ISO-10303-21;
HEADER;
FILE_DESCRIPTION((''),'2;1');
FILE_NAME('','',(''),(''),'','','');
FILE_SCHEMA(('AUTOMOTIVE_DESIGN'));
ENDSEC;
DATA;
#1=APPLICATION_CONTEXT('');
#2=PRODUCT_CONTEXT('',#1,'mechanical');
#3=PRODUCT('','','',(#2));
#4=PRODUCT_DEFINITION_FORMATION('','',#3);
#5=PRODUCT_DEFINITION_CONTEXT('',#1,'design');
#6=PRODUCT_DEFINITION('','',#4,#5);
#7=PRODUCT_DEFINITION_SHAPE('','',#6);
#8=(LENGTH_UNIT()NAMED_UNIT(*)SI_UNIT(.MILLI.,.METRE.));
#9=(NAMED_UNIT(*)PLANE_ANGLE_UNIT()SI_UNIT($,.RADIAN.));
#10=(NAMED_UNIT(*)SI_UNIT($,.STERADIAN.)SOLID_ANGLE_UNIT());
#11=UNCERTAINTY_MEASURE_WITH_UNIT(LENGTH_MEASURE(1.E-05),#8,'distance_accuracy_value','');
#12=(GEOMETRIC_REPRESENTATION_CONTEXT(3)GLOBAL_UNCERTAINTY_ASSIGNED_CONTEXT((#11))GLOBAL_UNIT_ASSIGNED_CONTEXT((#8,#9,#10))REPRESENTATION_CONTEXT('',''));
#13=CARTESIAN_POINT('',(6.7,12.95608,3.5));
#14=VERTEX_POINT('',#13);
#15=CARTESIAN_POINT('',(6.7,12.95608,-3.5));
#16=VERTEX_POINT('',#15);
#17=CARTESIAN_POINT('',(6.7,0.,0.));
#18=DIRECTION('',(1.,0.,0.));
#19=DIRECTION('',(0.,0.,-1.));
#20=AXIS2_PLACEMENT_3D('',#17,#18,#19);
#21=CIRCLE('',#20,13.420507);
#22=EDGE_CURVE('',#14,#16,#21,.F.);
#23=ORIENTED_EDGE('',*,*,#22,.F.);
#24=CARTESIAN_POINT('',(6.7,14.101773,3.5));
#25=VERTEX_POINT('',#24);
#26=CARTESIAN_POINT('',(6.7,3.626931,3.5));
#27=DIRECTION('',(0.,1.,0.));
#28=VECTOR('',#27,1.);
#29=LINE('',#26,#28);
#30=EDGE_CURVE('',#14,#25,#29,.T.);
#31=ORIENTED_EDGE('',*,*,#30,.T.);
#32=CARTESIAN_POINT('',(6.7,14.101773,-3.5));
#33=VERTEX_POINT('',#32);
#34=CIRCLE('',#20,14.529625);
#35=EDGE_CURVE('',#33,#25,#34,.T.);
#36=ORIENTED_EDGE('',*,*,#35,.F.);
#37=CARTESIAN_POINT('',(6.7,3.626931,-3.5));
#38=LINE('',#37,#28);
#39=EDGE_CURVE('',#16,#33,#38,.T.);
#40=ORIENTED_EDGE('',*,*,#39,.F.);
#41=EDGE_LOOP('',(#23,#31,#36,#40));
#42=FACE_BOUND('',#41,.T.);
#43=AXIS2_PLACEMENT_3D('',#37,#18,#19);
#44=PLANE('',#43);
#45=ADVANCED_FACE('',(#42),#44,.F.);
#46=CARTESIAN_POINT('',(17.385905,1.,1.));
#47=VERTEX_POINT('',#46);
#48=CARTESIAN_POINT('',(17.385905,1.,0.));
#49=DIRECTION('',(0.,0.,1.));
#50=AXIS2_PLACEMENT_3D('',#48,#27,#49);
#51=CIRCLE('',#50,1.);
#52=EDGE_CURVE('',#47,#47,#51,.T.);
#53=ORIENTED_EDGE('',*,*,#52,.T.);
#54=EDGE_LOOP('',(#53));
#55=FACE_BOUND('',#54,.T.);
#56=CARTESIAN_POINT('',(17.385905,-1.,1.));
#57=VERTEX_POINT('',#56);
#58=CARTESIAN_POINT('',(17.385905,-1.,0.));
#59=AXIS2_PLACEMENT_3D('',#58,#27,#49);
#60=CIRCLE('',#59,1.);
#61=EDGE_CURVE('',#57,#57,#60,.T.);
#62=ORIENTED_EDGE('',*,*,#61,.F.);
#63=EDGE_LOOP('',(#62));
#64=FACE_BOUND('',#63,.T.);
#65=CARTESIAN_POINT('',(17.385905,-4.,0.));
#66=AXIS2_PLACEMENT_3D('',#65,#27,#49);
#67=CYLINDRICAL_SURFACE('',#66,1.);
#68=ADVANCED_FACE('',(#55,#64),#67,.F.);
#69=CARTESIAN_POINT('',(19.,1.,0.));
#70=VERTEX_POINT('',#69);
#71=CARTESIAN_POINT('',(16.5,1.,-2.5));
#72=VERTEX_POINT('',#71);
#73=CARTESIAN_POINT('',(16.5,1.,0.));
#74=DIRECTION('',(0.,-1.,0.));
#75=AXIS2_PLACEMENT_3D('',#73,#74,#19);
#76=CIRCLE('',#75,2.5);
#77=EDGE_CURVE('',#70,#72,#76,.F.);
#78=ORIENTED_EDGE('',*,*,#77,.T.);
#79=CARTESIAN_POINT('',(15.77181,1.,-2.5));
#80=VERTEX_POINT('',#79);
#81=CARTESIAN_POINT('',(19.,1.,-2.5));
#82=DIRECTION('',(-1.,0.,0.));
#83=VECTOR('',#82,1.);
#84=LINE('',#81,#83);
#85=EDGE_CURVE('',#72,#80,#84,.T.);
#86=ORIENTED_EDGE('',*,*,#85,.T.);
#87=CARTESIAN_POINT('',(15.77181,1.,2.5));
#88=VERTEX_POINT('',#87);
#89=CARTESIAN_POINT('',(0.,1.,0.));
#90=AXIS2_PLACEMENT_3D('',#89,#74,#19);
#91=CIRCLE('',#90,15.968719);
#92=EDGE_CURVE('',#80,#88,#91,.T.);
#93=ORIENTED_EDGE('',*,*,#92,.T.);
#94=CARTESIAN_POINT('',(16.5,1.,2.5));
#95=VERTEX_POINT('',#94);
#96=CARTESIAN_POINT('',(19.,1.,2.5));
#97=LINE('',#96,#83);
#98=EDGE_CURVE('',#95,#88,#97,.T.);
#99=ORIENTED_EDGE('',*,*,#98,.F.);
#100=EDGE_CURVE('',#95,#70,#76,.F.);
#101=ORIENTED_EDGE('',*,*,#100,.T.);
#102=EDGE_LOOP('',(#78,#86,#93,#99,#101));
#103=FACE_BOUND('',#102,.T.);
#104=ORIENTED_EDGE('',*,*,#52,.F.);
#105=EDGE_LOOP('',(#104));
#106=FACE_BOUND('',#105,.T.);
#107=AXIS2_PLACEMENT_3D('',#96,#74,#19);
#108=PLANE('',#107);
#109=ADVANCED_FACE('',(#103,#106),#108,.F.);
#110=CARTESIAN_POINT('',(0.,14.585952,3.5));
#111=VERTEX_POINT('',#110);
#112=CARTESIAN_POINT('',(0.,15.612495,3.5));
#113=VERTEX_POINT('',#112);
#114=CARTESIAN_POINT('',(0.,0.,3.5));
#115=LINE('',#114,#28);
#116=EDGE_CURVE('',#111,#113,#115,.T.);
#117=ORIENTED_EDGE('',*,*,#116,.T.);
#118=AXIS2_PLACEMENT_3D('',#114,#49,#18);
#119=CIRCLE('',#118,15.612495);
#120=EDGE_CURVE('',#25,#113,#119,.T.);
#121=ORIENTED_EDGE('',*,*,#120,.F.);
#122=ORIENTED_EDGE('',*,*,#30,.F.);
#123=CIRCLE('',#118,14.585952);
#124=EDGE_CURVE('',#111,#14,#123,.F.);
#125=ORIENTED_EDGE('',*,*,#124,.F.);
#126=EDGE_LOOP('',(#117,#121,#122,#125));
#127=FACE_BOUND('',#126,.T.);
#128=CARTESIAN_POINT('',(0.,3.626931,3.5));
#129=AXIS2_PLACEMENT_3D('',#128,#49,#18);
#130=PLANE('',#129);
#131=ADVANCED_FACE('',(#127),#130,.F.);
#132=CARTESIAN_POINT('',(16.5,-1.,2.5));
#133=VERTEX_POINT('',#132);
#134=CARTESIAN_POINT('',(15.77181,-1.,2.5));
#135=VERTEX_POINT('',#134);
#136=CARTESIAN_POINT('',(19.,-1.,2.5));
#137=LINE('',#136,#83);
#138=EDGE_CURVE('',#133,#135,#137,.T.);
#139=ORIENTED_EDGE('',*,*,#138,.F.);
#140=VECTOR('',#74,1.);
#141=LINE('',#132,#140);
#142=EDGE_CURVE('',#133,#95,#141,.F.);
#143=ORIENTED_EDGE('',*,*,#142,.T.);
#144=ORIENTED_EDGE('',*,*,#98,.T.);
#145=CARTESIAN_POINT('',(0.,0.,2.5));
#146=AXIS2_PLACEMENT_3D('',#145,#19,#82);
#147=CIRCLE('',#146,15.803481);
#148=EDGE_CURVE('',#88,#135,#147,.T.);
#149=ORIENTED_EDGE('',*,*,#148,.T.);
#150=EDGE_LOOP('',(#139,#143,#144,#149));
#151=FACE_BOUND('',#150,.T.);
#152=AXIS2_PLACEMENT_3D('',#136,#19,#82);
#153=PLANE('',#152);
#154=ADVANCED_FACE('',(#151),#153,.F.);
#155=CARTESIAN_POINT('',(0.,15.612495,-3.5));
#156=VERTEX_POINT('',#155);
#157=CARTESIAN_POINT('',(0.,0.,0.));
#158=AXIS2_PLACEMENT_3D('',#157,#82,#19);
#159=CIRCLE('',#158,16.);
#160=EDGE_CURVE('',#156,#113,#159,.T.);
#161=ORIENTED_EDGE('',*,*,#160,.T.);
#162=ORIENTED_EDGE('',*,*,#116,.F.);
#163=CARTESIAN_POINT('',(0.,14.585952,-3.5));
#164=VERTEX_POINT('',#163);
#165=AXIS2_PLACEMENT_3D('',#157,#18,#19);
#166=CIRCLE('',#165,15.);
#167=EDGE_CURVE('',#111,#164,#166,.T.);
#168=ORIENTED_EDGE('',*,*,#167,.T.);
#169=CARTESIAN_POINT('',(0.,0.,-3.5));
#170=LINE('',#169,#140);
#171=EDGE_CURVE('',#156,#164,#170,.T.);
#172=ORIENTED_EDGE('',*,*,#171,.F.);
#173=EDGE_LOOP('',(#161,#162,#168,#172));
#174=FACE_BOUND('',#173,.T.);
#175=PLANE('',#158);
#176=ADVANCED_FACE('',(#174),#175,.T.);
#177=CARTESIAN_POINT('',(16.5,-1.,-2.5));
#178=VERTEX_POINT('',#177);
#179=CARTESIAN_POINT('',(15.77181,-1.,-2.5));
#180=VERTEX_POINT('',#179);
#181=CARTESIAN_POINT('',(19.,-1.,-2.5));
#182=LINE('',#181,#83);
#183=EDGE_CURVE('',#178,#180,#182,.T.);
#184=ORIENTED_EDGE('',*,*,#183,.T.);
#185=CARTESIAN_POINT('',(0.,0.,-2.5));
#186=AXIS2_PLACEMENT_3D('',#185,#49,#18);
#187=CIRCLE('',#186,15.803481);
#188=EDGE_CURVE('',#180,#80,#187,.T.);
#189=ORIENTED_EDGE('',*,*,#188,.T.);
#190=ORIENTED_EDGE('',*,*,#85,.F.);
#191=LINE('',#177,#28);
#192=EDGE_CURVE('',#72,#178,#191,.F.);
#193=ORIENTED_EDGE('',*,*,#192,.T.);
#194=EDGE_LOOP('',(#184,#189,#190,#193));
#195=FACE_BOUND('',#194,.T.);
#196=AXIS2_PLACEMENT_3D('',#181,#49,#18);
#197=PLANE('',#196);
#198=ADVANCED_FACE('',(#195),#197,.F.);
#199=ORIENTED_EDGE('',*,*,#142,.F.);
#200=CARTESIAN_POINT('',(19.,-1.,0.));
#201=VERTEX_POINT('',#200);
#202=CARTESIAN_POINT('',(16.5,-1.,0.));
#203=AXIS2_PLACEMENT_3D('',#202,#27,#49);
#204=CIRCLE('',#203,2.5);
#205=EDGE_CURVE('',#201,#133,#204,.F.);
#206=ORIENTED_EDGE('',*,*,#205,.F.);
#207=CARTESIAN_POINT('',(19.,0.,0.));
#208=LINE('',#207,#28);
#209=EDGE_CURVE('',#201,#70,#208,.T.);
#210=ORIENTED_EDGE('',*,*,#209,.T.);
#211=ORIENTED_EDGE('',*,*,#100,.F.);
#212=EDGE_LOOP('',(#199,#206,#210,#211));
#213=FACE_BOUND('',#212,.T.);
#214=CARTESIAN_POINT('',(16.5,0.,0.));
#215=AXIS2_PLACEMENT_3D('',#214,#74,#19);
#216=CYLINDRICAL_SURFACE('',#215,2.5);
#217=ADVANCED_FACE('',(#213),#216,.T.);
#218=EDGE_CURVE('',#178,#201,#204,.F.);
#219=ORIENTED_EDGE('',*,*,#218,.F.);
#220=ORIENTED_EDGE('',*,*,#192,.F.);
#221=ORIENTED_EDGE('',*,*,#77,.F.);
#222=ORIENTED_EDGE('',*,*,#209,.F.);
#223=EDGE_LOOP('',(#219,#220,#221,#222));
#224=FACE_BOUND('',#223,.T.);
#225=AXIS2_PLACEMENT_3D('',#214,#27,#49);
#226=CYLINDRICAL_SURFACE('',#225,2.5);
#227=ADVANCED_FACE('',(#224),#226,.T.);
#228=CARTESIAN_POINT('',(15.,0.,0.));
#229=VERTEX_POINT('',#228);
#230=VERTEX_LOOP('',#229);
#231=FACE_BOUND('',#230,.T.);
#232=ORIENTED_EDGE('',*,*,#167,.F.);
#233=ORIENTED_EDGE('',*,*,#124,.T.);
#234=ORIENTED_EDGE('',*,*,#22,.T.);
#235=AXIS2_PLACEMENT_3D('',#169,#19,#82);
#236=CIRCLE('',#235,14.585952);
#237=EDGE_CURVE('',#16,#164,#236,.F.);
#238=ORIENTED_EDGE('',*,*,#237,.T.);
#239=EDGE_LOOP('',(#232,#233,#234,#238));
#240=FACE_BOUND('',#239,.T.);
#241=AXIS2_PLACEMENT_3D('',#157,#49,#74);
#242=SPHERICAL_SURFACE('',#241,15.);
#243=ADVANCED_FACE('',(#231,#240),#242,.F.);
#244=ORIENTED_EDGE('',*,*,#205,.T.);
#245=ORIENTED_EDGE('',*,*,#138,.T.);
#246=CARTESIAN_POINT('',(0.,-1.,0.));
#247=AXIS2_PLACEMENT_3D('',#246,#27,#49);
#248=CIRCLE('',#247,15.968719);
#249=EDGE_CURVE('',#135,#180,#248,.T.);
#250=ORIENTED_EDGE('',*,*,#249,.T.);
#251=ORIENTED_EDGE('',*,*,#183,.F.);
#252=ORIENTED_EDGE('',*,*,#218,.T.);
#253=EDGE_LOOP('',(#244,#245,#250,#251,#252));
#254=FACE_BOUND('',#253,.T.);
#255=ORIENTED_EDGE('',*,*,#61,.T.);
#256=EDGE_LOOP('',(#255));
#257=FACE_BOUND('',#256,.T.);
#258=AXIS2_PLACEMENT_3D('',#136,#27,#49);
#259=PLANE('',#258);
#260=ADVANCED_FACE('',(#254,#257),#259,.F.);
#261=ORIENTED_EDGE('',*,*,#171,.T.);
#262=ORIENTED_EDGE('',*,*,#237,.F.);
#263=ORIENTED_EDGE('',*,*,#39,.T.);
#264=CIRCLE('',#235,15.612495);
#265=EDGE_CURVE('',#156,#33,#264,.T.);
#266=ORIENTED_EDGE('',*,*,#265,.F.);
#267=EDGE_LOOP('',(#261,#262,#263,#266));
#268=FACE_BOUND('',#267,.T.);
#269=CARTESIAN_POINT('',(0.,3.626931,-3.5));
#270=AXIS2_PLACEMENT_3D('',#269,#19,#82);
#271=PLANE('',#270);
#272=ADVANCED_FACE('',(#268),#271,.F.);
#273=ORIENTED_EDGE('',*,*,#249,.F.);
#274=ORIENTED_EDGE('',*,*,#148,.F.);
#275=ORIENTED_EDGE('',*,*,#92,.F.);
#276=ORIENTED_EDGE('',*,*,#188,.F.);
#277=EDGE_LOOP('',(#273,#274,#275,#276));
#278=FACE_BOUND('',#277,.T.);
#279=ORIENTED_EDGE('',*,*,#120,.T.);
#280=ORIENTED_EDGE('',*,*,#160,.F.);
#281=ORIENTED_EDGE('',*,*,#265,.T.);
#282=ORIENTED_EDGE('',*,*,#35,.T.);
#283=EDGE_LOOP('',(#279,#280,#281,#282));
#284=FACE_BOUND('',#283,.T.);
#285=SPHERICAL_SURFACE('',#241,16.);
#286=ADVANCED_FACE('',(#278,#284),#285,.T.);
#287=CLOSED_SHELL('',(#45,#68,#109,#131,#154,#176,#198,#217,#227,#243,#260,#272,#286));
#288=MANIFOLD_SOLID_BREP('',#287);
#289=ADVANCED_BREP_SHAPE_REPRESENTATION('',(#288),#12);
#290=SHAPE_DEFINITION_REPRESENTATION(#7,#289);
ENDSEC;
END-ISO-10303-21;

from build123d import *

# Parameters (mm, degrees)
REVOLVE_2_ANGLE     = 180
SKETCH_2_W          = 5
SKETCH_2_H          = 2
EXTRUDE_1_DEPTH     = 4
SKETCH_3_R          = 1
CUT_EXTRUDE_1_DEPTH = 5
FILLET_1_R          = 2.5
FILLET_2_R          = 2.5
SKETCH_4_W          = 6.7
SKETCH_4_H          = 7
CUT_EXTRUDE_2_DEPTH = 15


with BuildPart() as part:
    # 草图1 → 旋转2 (revolve)
    with BuildSketch(Plane(origin=(0, 0, 0), x_dir=(0, 0, -1), z_dir=(1, 0, 0))):
        with BuildLine():
            Line((-16, 0), (-15, 0))
            ThreePointArc((-15, 0), (0, 15), (15, 0))
            Line((15, 0), (16, 0))
            ThreePointArc((16, 0), (0, 16), (-16, 0))
        make_face()
    revolve(axis=Axis((0, 0, -15), (0, 0, -1)), revolution_arc=REVOLVE_2_ANGLE)

    # 草图2 → 凸台-拉伸1 (add)
    with BuildSketch(Plane(origin=(15, 0, 0), x_dir=(0, 0, -1), z_dir=(1, 0, 0))):
        Rectangle(SKETCH_2_W, SKETCH_2_H)
    extrude(amount=EXTRUDE_1_DEPTH)

    # 草图3 → 切除-拉伸1 (cut)
    with BuildSketch(Plane(origin=(0, 1, 0), x_dir=(1, 0, 0), z_dir=(0, 1, 0))):
        with Locations(Location((17.385905148, 0, 0), (0, 0, 270))):
            Circle(SKETCH_3_R)
    extrude(amount=-CUT_EXTRUDE_1_DEPTH, mode=Mode.SUBTRACT)

    # 圆角1
    fillet_1_edges = [part.edges().sort_by_distance(p)[0] for p in [
        (19, 0, -2.5),
    ]]
    fillet(fillet_1_edges, radius=FILLET_1_R)

    # 圆角2
    fillet_2_edges = [part.edges().sort_by_distance(p)[0] for p in [
        (19, 0, 2.5),
    ]]
    fillet(fillet_2_edges, radius=FILLET_2_R - 0.0001)  # a hair under: the kernel refuses the full size

    # 草图4 → 切除-拉伸2 (cut)
    with BuildSketch(Plane(origin=(0, 18.626931023, 0), x_dir=(1, 0, 0), z_dir=(0, 1, 0))):
        with Locations((3.35, 0)):
            Rectangle(SKETCH_4_W, SKETCH_4_H)
    extrude(amount=-CUT_EXTRUDE_2_DEPTH, mode=Mode.SUBTRACT)


solid = part.part
